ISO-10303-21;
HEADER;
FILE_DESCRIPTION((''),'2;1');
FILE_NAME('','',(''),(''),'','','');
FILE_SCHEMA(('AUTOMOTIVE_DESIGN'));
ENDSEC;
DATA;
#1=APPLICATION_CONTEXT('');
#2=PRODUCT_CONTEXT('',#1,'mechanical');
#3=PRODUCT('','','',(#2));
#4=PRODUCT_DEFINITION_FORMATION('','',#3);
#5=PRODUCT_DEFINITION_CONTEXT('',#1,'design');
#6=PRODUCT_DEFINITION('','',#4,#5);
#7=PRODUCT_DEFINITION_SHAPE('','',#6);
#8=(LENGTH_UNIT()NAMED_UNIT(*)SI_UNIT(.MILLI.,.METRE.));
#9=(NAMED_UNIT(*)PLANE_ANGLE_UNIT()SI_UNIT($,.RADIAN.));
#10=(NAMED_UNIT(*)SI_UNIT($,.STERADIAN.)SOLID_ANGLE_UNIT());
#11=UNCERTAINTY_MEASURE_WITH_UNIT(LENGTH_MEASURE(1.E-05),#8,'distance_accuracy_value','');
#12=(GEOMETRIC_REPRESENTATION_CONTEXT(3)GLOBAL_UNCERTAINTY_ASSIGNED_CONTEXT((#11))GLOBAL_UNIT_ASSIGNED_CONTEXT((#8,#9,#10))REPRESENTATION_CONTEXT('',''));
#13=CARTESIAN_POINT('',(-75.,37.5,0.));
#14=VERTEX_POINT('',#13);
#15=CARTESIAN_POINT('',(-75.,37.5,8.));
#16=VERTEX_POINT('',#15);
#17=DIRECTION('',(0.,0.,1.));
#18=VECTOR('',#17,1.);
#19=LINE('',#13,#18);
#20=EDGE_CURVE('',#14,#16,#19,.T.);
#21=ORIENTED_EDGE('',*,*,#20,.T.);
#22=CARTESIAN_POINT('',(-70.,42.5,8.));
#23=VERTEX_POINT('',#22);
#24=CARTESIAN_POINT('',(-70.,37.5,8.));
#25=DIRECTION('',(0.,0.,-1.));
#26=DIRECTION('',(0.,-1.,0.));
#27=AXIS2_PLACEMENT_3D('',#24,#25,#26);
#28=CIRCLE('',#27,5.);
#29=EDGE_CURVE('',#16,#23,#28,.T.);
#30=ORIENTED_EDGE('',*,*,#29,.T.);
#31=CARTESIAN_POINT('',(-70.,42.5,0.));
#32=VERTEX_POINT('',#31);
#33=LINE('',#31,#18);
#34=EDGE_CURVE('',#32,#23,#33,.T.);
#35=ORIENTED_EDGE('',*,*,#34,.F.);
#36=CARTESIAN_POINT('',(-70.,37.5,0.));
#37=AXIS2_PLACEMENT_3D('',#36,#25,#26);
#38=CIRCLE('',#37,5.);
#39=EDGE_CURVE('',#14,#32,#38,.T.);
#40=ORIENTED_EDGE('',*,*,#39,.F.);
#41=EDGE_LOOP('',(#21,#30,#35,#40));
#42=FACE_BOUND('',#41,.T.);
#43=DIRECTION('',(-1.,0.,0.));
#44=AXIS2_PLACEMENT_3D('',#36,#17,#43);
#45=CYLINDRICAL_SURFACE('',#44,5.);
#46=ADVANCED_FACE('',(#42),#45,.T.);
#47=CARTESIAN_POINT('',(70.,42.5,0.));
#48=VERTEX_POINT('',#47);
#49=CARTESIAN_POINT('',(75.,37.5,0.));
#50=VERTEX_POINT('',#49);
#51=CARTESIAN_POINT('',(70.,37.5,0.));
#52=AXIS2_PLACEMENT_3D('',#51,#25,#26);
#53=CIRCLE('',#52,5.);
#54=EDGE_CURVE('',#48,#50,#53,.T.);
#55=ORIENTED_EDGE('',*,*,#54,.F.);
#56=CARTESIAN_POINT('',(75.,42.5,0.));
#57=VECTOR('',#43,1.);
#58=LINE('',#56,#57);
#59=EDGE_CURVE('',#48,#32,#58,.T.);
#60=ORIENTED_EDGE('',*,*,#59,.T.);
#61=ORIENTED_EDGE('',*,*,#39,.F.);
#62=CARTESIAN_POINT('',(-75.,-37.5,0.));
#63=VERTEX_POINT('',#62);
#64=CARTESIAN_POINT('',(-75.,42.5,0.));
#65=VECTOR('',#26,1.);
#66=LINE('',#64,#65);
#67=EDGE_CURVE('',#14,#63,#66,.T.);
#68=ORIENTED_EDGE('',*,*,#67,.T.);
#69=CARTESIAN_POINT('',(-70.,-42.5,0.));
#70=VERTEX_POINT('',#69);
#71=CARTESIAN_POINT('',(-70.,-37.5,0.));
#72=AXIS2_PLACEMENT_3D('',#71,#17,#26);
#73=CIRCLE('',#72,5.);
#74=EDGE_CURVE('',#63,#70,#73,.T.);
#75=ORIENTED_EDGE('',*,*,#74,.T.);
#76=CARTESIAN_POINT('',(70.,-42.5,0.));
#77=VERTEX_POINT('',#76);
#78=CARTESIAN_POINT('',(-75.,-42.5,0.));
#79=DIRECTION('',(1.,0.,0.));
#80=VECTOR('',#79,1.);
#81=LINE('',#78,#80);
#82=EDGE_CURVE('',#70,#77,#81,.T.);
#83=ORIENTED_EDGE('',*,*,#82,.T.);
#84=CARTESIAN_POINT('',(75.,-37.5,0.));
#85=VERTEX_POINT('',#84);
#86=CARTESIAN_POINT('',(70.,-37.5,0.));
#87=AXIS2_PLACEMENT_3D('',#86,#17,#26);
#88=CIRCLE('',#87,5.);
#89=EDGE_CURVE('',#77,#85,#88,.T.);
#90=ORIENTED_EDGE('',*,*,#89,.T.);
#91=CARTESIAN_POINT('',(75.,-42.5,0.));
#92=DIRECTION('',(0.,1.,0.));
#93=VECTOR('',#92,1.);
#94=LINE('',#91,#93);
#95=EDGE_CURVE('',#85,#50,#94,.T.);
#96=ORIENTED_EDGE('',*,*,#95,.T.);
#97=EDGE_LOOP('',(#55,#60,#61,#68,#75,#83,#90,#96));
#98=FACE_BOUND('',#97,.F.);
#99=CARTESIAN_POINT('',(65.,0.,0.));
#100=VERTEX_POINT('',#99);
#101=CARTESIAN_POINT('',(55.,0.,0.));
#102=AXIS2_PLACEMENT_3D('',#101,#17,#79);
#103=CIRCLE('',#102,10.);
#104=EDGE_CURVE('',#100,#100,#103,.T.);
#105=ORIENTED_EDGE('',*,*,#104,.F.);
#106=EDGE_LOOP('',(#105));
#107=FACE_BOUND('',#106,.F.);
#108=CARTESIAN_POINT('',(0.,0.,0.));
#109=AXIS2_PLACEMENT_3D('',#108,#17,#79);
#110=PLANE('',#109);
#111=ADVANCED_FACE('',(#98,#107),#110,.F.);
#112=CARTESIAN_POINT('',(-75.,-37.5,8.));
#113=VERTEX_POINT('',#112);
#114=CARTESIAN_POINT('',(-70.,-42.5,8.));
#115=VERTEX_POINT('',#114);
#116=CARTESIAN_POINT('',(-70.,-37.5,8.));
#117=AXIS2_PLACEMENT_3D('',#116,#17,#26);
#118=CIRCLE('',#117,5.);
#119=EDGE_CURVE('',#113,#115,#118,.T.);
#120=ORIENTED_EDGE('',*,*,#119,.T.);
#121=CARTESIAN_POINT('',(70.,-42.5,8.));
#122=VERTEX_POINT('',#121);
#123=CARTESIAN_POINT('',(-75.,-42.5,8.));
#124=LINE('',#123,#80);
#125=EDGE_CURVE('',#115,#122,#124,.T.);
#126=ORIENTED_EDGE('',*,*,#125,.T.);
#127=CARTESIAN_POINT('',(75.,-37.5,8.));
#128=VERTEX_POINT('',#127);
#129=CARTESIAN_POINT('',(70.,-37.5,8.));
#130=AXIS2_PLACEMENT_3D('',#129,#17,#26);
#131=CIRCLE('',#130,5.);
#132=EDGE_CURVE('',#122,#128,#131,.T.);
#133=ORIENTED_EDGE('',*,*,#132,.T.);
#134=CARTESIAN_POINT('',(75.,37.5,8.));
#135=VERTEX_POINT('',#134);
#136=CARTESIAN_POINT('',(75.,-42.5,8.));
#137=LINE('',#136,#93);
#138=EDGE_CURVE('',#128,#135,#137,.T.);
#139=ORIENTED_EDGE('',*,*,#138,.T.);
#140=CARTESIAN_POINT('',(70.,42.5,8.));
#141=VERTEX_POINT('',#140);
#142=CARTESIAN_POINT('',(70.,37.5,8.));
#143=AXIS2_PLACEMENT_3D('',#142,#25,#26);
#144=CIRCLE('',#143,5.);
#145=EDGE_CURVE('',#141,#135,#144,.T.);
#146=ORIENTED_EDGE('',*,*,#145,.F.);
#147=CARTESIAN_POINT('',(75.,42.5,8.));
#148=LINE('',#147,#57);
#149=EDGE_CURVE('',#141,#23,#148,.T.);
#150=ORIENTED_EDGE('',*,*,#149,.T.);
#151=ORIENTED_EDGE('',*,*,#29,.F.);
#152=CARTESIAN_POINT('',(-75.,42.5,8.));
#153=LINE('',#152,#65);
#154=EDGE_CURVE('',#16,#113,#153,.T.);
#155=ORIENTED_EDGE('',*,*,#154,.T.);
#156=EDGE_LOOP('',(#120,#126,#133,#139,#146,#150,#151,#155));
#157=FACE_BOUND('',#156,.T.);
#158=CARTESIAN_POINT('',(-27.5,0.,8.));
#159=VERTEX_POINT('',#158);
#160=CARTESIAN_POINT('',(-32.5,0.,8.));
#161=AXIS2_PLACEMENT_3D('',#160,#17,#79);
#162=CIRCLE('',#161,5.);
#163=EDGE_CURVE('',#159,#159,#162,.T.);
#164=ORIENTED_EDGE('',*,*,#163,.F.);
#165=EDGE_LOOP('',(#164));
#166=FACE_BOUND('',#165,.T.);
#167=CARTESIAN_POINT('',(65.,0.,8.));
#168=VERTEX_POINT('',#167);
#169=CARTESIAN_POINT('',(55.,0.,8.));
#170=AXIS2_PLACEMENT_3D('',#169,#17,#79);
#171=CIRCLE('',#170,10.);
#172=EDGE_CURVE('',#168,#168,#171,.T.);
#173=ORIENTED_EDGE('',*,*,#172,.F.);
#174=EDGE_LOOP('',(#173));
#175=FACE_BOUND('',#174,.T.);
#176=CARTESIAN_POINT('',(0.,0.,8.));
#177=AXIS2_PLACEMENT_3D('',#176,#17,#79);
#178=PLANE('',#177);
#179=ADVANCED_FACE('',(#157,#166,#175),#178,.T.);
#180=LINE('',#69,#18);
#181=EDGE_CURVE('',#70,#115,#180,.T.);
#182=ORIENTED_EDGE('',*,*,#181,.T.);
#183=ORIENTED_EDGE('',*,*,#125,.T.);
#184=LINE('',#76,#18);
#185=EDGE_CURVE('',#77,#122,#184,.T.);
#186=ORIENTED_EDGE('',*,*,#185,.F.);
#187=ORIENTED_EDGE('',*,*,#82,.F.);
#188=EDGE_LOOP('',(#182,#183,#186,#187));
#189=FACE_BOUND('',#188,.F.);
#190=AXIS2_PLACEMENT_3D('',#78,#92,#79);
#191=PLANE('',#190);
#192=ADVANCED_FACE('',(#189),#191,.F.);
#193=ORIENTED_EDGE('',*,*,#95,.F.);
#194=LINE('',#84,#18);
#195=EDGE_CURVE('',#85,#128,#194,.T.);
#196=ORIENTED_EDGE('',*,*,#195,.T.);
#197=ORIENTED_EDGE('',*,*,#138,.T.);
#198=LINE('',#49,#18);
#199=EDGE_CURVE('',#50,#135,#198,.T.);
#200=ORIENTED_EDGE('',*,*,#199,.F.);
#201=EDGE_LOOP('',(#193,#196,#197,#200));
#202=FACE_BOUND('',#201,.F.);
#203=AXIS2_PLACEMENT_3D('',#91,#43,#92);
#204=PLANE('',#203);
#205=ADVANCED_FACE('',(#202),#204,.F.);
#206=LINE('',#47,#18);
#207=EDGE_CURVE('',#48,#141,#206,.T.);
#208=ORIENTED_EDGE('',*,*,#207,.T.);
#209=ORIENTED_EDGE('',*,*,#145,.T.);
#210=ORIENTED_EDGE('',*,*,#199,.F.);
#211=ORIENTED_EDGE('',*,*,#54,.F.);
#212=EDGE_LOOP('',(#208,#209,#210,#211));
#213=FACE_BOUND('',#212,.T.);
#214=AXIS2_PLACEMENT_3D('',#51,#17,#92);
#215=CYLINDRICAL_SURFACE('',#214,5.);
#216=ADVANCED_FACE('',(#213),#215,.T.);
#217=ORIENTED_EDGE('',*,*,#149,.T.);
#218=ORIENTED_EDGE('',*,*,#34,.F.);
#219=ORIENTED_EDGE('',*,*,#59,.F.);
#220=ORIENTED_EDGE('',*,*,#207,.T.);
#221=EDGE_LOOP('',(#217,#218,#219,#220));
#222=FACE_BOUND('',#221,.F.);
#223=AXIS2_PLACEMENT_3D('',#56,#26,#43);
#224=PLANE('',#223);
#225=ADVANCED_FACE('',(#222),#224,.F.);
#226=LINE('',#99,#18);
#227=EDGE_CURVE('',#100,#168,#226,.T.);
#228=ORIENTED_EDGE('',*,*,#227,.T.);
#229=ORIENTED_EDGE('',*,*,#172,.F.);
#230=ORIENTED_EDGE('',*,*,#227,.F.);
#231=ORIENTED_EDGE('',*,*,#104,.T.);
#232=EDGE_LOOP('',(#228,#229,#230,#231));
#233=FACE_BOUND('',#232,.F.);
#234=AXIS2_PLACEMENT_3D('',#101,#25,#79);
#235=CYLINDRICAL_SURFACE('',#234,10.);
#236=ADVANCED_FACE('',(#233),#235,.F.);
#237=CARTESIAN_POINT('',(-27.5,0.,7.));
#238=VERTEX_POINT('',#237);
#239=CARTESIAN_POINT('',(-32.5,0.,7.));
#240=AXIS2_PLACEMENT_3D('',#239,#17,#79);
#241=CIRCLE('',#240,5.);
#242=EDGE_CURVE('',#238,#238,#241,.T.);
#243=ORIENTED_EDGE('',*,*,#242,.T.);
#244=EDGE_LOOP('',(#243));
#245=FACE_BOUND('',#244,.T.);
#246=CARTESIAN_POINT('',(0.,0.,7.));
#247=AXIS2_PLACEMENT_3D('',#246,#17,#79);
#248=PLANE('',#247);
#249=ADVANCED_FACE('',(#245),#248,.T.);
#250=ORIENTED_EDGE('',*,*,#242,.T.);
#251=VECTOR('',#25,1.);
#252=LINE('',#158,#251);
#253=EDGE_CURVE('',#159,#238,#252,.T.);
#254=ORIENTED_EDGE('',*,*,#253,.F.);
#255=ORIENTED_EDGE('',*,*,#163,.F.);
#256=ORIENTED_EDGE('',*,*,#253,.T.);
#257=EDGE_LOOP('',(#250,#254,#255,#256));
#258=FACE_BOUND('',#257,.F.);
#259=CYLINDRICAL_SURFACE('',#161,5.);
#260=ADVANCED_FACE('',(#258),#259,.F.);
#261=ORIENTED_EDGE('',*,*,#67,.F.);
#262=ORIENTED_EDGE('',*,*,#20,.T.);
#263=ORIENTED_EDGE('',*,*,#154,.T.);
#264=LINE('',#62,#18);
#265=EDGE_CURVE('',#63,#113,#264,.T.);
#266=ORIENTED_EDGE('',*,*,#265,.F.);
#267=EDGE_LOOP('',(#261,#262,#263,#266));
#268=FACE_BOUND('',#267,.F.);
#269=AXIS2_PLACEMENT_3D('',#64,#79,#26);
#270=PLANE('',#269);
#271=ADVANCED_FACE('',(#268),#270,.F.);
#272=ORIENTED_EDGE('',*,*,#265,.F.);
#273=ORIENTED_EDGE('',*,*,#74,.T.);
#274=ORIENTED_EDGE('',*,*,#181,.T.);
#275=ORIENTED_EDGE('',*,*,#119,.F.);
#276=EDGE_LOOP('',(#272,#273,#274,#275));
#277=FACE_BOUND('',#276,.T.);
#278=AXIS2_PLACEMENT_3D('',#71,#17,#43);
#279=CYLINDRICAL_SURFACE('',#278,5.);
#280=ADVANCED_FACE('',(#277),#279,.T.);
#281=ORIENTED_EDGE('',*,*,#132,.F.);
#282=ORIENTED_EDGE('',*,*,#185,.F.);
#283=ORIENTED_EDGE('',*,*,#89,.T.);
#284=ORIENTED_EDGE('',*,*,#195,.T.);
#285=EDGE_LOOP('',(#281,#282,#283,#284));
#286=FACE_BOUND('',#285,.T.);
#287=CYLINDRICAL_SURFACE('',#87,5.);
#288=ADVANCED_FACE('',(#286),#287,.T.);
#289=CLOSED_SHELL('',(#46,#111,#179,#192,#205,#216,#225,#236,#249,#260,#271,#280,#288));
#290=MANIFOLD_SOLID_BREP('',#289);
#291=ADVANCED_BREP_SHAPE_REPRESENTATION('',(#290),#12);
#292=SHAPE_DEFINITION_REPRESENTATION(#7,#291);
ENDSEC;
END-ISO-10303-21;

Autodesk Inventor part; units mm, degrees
ref_plane "YZ Plane" through (0, 0, 0) normal (1, 0, 0) x (0, 1, 0)
ref_plane "XZ Plane" through (0, 0, 0) normal (0, 1, 0) x (-1, 0, 0)
ref_plane "XY Plane" through (0, 0, 0) normal (0, 0, 1) x (1, 0, 0)
sketch "Sketch1" plane through (0, 0, 0) normal (0, 0, 1) x (1, 0, 0)
  line L0 (-75, -42.5) -> (75, -42.5)
  line L1 (75, -42.5) -> (75, 42.5)
  line L2 (75, 42.5) -> (-75, 42.5)
  line L3 (-75, 42.5) -> (-75, -42.5)
  line L4 (-75, -42.5) -> (75, 42.5) construction
  line L5 (75, -42.5) -> (-75, 42.5) construction
  circle A0 centre (55, -22.5) radius 10
  circle A1 centre (55, 22.5) radius 10
  line L6 (0, 0) -> (75, 0) construction
  circle A2 centre (55, 0) radius 10
  dimension "d0" = 150
  dimension "d1" = 85
  dimension "d23" = 20
  dimension "d25" = 20
  dimension "d26" = 20
extrude "Plate1" add sketch "Sketch1" along normal blind 8 contours L3 L2 L1 L0 | A0 | A1
fillet "Corner Round1" radius 5 4 edges at (75, -42.5, 4) (-75, -42.5, 4) (-75, 42.5, 4) (75, 42.5, 4)
sketch "Sketch5" plane through (0, 0, 8) normal (0, 0, 1) x (1, 0, 0)
  line L0 (70, -42.5) -> (-70, -42.5) projected
  line L1 (-75, -37.5) -> (-75, 37.5) projected
  line L2 (-70, 42.5) -> (70, 42.5) projected
  circle A0 centre (-32.5, 0) radius 42.5
  circle A1 centre (-32.5, 0) radius 5
  point P0 (0, 0)
  dimension "d27" = 10
extrude "Extrusion2" cut sketch "Sketch5" against normal blind 1 contours A1
equation "\"d26\" = d25"
equation "\"d2\" = Thickness"
equation "\"BendReliefWidth\" = Thickness"
equation "\"BendReliefDepth\" = 0.5 * Thickness"
equation "\"CornerReliefSize\" = 4 * Thickness"
equation "\"MinimumRemnant\" = 2 * Thickness"
equation "\"TransitionRadius\" = BendRadius"
equation "\"JacobiRadiusSize\" = BendRadius"
equation "\"GapSize\" = Thickness"
equation "\"Thickness\" = 8"
equation "\"BendRadius\" = 5"
properties part number "PNS-783 leg floor plate" material "Steel"
